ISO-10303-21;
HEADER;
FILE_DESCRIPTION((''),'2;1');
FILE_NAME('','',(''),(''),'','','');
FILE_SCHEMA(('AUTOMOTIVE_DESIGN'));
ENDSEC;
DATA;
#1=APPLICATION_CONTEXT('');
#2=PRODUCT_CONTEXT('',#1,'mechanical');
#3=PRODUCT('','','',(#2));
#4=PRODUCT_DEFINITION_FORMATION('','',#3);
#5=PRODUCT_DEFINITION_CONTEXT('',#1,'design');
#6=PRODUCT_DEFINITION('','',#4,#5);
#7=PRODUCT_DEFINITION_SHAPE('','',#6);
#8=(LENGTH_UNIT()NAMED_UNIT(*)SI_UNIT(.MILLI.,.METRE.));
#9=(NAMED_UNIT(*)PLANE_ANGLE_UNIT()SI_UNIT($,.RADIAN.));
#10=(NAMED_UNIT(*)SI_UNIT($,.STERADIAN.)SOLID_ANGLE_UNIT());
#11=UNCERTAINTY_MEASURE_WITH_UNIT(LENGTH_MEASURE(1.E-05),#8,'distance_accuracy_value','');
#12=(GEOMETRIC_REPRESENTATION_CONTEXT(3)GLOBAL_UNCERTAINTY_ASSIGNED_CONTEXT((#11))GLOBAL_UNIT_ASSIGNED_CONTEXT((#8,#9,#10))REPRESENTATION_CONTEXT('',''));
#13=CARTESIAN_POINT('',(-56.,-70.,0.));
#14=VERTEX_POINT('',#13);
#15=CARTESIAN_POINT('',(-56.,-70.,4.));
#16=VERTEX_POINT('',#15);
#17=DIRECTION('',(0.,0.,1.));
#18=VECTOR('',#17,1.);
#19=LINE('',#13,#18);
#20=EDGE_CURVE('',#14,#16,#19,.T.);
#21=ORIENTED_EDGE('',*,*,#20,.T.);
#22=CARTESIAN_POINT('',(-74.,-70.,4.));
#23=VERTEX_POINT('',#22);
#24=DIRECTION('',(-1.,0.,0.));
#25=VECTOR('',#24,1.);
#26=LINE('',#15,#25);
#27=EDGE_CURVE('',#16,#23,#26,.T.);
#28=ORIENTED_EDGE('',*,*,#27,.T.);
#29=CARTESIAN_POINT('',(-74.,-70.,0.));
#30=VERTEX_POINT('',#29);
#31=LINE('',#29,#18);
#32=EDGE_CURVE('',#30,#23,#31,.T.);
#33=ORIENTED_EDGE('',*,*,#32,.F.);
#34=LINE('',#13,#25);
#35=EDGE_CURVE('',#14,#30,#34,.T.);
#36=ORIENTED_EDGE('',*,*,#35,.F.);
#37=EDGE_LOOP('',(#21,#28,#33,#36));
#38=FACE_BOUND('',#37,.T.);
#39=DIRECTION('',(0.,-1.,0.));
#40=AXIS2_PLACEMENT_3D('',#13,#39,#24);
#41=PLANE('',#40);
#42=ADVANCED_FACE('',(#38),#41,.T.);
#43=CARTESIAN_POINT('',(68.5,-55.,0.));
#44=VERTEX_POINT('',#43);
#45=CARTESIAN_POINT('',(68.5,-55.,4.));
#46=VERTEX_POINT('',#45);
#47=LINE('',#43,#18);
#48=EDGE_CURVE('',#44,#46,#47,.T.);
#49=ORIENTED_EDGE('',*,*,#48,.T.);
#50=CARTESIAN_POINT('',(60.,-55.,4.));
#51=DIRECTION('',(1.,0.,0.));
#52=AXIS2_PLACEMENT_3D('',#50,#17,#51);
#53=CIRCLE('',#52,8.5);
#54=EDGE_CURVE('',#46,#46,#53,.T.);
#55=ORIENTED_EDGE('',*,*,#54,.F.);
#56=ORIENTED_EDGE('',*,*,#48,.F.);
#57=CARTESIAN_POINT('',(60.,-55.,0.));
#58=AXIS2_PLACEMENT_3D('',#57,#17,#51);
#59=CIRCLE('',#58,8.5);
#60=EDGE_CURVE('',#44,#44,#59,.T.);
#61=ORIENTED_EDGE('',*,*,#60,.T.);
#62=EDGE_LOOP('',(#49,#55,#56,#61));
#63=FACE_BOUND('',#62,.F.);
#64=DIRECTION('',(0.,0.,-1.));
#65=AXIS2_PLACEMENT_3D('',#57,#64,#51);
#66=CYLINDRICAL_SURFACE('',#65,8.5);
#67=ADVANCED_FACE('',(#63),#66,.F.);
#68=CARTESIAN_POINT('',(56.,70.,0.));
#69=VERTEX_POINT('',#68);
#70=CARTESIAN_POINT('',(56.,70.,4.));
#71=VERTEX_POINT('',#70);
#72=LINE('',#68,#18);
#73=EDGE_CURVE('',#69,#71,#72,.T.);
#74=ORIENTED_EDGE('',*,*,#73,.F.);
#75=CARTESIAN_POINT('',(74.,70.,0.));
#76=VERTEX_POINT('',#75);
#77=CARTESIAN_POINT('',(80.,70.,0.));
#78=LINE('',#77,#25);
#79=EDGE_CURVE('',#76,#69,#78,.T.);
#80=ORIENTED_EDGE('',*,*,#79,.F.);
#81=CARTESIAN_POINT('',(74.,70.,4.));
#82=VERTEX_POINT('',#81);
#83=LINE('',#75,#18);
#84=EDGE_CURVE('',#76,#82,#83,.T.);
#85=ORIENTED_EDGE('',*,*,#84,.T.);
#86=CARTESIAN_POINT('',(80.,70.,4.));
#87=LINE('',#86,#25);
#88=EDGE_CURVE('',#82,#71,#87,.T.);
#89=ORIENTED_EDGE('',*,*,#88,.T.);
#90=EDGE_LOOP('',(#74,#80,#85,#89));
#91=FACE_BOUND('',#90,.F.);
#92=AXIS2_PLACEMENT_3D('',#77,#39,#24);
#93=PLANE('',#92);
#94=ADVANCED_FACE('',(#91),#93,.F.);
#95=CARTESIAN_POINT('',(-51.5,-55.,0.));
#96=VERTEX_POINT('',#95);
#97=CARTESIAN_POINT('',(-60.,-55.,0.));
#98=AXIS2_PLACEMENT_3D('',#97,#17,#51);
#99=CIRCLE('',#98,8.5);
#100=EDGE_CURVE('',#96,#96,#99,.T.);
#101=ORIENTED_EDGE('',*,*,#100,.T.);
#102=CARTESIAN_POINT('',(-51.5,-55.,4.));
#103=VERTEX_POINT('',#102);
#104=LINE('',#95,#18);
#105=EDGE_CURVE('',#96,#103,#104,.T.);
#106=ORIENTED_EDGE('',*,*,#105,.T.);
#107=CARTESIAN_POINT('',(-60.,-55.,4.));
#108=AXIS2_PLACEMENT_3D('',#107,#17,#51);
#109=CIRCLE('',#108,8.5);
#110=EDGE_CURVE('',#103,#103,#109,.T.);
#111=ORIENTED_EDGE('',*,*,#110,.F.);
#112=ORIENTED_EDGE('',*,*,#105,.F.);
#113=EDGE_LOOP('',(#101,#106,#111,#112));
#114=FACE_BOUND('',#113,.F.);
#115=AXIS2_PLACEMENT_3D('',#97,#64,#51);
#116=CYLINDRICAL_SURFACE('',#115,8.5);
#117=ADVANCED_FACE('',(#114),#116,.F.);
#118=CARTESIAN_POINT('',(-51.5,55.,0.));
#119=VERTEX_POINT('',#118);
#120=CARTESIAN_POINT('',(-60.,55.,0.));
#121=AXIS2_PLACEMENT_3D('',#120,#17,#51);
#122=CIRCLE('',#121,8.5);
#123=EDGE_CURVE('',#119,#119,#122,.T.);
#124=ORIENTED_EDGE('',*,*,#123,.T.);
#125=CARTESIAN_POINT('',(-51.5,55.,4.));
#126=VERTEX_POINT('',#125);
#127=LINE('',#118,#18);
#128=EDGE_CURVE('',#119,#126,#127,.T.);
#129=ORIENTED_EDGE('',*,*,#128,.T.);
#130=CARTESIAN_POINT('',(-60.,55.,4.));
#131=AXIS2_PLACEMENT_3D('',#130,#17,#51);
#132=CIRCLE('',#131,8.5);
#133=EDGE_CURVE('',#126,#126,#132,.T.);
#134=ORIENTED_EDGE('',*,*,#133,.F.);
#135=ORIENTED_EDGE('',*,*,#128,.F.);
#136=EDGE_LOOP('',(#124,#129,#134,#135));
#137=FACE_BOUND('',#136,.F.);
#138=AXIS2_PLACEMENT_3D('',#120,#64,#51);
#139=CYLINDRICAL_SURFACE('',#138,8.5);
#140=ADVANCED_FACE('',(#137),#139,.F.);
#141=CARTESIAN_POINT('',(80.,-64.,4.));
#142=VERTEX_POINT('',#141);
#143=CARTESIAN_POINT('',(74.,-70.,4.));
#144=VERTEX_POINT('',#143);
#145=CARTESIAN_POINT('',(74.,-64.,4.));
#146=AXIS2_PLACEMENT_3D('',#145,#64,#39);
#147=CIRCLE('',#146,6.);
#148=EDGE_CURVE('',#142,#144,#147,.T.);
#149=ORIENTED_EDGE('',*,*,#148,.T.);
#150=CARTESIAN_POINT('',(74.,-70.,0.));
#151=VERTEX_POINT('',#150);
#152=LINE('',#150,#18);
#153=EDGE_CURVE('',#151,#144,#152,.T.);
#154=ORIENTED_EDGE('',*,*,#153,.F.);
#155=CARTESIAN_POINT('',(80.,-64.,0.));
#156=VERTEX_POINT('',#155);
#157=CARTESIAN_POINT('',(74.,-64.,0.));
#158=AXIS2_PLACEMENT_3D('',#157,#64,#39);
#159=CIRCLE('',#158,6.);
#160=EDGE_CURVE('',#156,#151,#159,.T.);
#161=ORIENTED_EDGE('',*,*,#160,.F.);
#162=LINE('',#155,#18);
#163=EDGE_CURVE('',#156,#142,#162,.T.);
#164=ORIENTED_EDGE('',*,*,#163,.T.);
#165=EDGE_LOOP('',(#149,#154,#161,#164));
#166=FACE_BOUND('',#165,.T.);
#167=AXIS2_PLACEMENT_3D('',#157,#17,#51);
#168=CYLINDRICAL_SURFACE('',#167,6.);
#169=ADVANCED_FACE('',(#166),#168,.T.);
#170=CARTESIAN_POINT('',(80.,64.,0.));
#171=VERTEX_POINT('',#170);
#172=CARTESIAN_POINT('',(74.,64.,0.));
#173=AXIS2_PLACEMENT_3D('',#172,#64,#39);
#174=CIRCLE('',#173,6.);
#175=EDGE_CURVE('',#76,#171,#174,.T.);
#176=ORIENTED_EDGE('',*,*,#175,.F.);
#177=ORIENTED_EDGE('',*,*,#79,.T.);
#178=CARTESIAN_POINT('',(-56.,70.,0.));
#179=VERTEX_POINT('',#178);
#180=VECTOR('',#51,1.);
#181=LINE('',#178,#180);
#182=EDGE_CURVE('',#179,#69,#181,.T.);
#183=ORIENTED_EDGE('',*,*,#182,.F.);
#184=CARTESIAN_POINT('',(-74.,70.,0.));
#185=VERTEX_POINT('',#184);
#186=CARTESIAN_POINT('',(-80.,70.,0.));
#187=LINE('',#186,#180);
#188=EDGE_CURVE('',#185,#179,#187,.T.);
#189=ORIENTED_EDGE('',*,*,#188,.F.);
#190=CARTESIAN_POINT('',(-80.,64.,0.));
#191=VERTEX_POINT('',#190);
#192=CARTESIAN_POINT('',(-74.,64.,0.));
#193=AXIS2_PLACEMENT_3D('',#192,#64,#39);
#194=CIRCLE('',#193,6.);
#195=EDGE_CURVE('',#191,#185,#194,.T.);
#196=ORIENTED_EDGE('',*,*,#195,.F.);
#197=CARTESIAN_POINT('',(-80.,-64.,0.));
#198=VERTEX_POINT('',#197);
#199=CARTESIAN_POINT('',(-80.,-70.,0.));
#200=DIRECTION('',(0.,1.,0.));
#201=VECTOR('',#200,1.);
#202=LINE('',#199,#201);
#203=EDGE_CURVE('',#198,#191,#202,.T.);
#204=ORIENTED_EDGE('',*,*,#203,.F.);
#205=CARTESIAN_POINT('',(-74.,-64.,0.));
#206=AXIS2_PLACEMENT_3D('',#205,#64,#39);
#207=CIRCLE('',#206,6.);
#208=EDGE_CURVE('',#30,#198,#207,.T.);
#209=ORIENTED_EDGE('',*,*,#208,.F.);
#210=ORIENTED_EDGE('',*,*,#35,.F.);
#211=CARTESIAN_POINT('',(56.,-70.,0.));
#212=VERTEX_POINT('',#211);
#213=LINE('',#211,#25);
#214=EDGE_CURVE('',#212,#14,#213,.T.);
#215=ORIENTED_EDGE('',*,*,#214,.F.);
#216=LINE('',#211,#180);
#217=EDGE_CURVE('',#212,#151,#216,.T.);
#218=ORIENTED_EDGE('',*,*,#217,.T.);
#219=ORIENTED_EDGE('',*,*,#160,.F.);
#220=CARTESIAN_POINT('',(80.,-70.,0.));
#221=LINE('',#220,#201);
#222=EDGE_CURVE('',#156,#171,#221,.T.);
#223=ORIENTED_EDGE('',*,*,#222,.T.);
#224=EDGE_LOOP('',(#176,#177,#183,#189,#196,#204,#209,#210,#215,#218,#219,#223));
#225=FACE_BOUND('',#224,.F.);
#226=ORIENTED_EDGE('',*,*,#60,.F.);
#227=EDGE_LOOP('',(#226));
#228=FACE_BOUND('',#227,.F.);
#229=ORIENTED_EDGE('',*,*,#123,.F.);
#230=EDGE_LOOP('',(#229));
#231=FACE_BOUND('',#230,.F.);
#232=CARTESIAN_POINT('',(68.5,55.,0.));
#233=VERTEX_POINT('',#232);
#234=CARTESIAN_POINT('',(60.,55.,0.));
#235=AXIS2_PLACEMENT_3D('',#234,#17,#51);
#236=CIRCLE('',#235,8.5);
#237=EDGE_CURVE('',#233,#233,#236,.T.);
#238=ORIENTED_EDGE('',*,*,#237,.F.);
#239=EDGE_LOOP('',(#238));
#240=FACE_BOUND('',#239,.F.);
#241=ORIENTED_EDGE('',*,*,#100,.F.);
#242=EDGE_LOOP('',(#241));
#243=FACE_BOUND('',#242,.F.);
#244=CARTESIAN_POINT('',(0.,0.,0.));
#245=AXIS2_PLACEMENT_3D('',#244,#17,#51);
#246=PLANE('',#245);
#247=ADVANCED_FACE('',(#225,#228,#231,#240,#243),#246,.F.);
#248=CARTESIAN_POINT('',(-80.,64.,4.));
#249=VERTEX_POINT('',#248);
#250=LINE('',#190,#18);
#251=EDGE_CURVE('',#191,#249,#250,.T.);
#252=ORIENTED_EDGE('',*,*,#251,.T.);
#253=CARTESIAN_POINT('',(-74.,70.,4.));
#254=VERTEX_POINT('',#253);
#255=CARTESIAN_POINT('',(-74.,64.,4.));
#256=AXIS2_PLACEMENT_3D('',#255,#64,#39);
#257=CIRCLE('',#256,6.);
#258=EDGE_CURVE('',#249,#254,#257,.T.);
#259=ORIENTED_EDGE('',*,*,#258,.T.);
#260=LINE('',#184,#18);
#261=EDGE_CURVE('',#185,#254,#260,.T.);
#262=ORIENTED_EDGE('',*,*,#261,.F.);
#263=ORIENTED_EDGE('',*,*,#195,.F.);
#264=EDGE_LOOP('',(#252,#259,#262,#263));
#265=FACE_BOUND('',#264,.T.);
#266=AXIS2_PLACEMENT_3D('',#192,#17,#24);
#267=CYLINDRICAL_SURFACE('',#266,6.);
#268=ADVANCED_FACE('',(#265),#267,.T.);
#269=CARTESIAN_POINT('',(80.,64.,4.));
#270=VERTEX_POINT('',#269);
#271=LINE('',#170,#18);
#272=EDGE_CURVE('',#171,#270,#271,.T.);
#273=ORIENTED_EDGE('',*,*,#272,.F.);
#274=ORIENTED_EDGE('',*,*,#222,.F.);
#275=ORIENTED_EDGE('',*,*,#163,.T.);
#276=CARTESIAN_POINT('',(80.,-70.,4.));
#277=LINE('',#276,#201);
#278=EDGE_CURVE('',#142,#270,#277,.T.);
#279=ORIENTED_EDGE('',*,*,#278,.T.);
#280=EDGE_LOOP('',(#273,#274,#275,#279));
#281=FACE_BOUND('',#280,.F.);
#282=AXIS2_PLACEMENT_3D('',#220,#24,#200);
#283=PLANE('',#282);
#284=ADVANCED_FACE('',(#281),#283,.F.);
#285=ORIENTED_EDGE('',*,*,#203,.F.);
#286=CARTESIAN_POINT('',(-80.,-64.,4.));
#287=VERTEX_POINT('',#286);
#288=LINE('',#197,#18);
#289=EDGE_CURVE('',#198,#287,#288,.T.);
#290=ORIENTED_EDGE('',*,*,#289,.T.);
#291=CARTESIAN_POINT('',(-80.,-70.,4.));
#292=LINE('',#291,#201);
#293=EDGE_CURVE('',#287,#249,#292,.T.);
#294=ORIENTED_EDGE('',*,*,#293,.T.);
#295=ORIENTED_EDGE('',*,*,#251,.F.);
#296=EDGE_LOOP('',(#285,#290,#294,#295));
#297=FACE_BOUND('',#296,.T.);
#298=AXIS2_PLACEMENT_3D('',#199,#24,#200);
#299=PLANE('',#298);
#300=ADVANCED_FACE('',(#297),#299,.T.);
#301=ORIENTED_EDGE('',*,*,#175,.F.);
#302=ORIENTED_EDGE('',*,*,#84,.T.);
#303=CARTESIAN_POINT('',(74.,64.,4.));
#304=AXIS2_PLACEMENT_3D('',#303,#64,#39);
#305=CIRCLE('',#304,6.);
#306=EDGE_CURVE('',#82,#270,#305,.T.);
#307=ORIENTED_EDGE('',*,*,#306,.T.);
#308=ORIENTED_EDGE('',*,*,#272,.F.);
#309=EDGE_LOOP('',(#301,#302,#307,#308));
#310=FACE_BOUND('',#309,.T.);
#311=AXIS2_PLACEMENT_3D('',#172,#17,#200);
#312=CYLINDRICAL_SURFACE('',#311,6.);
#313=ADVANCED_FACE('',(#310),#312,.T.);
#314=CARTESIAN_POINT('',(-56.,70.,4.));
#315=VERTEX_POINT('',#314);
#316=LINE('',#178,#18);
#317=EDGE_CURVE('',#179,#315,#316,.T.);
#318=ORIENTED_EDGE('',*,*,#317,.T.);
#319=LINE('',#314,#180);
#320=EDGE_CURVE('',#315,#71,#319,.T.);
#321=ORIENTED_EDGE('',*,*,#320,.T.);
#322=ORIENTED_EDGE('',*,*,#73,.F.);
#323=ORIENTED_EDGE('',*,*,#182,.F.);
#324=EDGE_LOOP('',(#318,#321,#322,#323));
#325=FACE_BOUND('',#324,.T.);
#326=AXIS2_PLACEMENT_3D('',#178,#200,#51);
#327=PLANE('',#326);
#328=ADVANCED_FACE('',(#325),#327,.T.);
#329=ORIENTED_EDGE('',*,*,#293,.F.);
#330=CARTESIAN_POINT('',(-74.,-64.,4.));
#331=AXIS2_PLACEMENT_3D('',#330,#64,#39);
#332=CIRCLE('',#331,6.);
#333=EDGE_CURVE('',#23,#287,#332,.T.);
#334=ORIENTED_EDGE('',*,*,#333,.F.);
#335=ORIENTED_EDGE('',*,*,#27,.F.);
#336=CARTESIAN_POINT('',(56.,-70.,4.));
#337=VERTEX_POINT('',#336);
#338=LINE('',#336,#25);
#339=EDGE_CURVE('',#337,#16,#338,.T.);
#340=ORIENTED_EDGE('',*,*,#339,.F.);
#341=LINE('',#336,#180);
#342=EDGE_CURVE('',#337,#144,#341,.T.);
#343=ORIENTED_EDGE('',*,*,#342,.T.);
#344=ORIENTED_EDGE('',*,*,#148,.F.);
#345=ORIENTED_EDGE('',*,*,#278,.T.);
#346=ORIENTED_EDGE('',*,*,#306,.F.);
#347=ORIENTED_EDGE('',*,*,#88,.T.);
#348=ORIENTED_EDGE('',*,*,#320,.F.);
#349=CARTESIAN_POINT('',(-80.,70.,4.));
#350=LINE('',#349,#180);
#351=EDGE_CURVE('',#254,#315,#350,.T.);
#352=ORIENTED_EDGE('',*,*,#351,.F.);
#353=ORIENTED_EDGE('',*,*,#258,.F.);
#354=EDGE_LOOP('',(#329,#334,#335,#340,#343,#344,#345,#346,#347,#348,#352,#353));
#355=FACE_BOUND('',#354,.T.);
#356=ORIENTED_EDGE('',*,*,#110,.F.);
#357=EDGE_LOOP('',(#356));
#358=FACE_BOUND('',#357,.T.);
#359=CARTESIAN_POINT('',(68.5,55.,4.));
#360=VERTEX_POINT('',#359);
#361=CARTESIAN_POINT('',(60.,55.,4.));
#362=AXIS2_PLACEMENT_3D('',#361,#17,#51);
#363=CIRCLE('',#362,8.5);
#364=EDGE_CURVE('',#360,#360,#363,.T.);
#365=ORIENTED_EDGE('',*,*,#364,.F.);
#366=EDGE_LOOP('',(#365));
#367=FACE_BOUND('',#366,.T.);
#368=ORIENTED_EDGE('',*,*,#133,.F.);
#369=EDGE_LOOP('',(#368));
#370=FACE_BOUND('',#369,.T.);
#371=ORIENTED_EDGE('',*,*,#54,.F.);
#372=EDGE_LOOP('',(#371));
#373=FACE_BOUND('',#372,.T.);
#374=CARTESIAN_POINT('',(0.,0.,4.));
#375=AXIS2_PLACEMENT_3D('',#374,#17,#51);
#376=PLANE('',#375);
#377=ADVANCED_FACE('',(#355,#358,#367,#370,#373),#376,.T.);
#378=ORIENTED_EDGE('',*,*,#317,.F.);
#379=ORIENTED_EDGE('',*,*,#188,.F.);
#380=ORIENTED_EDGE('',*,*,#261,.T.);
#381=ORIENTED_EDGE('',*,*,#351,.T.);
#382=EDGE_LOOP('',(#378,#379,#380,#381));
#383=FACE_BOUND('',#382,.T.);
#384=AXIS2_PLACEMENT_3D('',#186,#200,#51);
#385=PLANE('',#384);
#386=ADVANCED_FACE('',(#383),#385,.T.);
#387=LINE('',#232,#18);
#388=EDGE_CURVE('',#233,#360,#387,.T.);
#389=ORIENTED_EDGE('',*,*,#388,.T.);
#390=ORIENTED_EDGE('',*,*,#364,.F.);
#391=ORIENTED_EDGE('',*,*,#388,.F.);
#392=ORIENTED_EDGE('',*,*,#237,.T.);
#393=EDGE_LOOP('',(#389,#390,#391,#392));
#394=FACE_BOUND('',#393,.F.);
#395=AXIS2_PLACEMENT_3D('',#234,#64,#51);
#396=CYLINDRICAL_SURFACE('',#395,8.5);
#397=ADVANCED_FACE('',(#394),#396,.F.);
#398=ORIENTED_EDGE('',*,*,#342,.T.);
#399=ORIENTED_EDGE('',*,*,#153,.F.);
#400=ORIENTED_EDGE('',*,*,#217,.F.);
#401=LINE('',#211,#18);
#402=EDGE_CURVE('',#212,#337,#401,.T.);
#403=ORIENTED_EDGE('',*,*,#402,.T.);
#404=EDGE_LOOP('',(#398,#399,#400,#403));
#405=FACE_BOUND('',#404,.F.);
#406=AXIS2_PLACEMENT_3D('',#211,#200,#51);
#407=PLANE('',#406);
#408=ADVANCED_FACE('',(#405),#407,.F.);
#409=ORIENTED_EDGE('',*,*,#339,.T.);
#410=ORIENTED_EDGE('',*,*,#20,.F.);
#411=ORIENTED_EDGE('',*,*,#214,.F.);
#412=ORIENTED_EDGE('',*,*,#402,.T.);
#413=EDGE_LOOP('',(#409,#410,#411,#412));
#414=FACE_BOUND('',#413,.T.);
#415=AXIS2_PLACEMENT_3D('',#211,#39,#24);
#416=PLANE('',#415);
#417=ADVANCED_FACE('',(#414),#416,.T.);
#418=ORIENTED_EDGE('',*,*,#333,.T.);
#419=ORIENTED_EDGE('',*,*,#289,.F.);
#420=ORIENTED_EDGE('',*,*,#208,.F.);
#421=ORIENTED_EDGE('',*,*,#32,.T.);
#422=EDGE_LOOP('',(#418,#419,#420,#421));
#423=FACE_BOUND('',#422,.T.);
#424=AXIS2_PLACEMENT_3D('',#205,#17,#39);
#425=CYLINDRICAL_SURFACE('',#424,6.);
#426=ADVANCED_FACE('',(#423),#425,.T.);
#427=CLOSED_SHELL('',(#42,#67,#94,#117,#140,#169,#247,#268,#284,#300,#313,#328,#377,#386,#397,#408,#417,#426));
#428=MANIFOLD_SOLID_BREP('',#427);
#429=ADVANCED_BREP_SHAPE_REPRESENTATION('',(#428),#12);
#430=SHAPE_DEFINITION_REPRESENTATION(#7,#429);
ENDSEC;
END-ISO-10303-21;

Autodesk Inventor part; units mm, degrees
ref_plane "YZ Plane" through (0, 0, 0) normal (1, 0, 0) x (0, 1, 0)
ref_plane "XZ Plane" through (0, 0, 0) normal (0, 1, 0) x (-1, 0, 0)
ref_plane "XY Plane" through (0, 0, 0) normal (0, 0, 1) x (1, 0, 0)
sketch3d "3D Sketch1"
sketch "Sketch1" plane through (0, 0, 0) normal (0, 0, 1) x (1, 0, 0)
  line L0 (-56, 70) -> (56, 70)
  line L1 (56, 70) -> (56, -70) construction
  line L2 (56, -70) -> (-56, -70)
  line L3 (-56, -70) -> (-56, 70) construction
  line L4 (-56, 70) -> (56, -70) construction
  line L5 (56, 70) -> (-56, -70) construction
  line L6 (56, -70) -> (80, -70)
  line L7 (80, -70) -> (80, 70)
  line L8 (80, 70) -> (56, 70)
  line L9 (-56, -70) -> (-80, -70)
  line L10 (-80, -70) -> (-80, 70)
  line L11 (-80, 70) -> (-56, 70)
  circle A0 centre (60, -55) radius 8.5
  circle A1 centre (60, 55) radius 8.5
  circle A2 centre (-60, -55) radius 8.5
  circle A3 centre (-60, 55) radius 8.5
  line L12 (0, -70) -> (0, 70) construction
  line L13 (80, 0) -> (-80, 0) construction
  point P0 (0, 0)
  dimension "d30" = 140
  dimension "d34" = 160
  dimension "d35" = 17
  dimension "d36" = 20
  dimension "d37" = 15
extrude "Plate1" add sketch "Sketch1" along normal blind 4
fillet "Corner Round1" radius 6 4 edges at (80, 70, 2) (-80, 70, 2) (-80, -70, 2) (80, -70, 2)
equation "\"d6\" = Thickness"
equation "\"BendReliefWidth\" = Thickness"
equation "\"BendReliefDepth\" = 0.5 * Thickness"
equation "\"CornerReliefSize\" = 4 * Thickness"
equation "\"MinimumRemnant\" = 2 * Thickness"
equation "\"TransitionRadius\" = BendRadius"
equation "\"JacobiRadiusSize\" = BendRadius"
equation "\"GapSize\" = Thickness"
equation "\"Thickness\" = 4"
equation "\"BendRadius\" = 5"
properties part number "MSC 908 TRANSVERSE PILLAR PLATE" material "Stainless Steel"
